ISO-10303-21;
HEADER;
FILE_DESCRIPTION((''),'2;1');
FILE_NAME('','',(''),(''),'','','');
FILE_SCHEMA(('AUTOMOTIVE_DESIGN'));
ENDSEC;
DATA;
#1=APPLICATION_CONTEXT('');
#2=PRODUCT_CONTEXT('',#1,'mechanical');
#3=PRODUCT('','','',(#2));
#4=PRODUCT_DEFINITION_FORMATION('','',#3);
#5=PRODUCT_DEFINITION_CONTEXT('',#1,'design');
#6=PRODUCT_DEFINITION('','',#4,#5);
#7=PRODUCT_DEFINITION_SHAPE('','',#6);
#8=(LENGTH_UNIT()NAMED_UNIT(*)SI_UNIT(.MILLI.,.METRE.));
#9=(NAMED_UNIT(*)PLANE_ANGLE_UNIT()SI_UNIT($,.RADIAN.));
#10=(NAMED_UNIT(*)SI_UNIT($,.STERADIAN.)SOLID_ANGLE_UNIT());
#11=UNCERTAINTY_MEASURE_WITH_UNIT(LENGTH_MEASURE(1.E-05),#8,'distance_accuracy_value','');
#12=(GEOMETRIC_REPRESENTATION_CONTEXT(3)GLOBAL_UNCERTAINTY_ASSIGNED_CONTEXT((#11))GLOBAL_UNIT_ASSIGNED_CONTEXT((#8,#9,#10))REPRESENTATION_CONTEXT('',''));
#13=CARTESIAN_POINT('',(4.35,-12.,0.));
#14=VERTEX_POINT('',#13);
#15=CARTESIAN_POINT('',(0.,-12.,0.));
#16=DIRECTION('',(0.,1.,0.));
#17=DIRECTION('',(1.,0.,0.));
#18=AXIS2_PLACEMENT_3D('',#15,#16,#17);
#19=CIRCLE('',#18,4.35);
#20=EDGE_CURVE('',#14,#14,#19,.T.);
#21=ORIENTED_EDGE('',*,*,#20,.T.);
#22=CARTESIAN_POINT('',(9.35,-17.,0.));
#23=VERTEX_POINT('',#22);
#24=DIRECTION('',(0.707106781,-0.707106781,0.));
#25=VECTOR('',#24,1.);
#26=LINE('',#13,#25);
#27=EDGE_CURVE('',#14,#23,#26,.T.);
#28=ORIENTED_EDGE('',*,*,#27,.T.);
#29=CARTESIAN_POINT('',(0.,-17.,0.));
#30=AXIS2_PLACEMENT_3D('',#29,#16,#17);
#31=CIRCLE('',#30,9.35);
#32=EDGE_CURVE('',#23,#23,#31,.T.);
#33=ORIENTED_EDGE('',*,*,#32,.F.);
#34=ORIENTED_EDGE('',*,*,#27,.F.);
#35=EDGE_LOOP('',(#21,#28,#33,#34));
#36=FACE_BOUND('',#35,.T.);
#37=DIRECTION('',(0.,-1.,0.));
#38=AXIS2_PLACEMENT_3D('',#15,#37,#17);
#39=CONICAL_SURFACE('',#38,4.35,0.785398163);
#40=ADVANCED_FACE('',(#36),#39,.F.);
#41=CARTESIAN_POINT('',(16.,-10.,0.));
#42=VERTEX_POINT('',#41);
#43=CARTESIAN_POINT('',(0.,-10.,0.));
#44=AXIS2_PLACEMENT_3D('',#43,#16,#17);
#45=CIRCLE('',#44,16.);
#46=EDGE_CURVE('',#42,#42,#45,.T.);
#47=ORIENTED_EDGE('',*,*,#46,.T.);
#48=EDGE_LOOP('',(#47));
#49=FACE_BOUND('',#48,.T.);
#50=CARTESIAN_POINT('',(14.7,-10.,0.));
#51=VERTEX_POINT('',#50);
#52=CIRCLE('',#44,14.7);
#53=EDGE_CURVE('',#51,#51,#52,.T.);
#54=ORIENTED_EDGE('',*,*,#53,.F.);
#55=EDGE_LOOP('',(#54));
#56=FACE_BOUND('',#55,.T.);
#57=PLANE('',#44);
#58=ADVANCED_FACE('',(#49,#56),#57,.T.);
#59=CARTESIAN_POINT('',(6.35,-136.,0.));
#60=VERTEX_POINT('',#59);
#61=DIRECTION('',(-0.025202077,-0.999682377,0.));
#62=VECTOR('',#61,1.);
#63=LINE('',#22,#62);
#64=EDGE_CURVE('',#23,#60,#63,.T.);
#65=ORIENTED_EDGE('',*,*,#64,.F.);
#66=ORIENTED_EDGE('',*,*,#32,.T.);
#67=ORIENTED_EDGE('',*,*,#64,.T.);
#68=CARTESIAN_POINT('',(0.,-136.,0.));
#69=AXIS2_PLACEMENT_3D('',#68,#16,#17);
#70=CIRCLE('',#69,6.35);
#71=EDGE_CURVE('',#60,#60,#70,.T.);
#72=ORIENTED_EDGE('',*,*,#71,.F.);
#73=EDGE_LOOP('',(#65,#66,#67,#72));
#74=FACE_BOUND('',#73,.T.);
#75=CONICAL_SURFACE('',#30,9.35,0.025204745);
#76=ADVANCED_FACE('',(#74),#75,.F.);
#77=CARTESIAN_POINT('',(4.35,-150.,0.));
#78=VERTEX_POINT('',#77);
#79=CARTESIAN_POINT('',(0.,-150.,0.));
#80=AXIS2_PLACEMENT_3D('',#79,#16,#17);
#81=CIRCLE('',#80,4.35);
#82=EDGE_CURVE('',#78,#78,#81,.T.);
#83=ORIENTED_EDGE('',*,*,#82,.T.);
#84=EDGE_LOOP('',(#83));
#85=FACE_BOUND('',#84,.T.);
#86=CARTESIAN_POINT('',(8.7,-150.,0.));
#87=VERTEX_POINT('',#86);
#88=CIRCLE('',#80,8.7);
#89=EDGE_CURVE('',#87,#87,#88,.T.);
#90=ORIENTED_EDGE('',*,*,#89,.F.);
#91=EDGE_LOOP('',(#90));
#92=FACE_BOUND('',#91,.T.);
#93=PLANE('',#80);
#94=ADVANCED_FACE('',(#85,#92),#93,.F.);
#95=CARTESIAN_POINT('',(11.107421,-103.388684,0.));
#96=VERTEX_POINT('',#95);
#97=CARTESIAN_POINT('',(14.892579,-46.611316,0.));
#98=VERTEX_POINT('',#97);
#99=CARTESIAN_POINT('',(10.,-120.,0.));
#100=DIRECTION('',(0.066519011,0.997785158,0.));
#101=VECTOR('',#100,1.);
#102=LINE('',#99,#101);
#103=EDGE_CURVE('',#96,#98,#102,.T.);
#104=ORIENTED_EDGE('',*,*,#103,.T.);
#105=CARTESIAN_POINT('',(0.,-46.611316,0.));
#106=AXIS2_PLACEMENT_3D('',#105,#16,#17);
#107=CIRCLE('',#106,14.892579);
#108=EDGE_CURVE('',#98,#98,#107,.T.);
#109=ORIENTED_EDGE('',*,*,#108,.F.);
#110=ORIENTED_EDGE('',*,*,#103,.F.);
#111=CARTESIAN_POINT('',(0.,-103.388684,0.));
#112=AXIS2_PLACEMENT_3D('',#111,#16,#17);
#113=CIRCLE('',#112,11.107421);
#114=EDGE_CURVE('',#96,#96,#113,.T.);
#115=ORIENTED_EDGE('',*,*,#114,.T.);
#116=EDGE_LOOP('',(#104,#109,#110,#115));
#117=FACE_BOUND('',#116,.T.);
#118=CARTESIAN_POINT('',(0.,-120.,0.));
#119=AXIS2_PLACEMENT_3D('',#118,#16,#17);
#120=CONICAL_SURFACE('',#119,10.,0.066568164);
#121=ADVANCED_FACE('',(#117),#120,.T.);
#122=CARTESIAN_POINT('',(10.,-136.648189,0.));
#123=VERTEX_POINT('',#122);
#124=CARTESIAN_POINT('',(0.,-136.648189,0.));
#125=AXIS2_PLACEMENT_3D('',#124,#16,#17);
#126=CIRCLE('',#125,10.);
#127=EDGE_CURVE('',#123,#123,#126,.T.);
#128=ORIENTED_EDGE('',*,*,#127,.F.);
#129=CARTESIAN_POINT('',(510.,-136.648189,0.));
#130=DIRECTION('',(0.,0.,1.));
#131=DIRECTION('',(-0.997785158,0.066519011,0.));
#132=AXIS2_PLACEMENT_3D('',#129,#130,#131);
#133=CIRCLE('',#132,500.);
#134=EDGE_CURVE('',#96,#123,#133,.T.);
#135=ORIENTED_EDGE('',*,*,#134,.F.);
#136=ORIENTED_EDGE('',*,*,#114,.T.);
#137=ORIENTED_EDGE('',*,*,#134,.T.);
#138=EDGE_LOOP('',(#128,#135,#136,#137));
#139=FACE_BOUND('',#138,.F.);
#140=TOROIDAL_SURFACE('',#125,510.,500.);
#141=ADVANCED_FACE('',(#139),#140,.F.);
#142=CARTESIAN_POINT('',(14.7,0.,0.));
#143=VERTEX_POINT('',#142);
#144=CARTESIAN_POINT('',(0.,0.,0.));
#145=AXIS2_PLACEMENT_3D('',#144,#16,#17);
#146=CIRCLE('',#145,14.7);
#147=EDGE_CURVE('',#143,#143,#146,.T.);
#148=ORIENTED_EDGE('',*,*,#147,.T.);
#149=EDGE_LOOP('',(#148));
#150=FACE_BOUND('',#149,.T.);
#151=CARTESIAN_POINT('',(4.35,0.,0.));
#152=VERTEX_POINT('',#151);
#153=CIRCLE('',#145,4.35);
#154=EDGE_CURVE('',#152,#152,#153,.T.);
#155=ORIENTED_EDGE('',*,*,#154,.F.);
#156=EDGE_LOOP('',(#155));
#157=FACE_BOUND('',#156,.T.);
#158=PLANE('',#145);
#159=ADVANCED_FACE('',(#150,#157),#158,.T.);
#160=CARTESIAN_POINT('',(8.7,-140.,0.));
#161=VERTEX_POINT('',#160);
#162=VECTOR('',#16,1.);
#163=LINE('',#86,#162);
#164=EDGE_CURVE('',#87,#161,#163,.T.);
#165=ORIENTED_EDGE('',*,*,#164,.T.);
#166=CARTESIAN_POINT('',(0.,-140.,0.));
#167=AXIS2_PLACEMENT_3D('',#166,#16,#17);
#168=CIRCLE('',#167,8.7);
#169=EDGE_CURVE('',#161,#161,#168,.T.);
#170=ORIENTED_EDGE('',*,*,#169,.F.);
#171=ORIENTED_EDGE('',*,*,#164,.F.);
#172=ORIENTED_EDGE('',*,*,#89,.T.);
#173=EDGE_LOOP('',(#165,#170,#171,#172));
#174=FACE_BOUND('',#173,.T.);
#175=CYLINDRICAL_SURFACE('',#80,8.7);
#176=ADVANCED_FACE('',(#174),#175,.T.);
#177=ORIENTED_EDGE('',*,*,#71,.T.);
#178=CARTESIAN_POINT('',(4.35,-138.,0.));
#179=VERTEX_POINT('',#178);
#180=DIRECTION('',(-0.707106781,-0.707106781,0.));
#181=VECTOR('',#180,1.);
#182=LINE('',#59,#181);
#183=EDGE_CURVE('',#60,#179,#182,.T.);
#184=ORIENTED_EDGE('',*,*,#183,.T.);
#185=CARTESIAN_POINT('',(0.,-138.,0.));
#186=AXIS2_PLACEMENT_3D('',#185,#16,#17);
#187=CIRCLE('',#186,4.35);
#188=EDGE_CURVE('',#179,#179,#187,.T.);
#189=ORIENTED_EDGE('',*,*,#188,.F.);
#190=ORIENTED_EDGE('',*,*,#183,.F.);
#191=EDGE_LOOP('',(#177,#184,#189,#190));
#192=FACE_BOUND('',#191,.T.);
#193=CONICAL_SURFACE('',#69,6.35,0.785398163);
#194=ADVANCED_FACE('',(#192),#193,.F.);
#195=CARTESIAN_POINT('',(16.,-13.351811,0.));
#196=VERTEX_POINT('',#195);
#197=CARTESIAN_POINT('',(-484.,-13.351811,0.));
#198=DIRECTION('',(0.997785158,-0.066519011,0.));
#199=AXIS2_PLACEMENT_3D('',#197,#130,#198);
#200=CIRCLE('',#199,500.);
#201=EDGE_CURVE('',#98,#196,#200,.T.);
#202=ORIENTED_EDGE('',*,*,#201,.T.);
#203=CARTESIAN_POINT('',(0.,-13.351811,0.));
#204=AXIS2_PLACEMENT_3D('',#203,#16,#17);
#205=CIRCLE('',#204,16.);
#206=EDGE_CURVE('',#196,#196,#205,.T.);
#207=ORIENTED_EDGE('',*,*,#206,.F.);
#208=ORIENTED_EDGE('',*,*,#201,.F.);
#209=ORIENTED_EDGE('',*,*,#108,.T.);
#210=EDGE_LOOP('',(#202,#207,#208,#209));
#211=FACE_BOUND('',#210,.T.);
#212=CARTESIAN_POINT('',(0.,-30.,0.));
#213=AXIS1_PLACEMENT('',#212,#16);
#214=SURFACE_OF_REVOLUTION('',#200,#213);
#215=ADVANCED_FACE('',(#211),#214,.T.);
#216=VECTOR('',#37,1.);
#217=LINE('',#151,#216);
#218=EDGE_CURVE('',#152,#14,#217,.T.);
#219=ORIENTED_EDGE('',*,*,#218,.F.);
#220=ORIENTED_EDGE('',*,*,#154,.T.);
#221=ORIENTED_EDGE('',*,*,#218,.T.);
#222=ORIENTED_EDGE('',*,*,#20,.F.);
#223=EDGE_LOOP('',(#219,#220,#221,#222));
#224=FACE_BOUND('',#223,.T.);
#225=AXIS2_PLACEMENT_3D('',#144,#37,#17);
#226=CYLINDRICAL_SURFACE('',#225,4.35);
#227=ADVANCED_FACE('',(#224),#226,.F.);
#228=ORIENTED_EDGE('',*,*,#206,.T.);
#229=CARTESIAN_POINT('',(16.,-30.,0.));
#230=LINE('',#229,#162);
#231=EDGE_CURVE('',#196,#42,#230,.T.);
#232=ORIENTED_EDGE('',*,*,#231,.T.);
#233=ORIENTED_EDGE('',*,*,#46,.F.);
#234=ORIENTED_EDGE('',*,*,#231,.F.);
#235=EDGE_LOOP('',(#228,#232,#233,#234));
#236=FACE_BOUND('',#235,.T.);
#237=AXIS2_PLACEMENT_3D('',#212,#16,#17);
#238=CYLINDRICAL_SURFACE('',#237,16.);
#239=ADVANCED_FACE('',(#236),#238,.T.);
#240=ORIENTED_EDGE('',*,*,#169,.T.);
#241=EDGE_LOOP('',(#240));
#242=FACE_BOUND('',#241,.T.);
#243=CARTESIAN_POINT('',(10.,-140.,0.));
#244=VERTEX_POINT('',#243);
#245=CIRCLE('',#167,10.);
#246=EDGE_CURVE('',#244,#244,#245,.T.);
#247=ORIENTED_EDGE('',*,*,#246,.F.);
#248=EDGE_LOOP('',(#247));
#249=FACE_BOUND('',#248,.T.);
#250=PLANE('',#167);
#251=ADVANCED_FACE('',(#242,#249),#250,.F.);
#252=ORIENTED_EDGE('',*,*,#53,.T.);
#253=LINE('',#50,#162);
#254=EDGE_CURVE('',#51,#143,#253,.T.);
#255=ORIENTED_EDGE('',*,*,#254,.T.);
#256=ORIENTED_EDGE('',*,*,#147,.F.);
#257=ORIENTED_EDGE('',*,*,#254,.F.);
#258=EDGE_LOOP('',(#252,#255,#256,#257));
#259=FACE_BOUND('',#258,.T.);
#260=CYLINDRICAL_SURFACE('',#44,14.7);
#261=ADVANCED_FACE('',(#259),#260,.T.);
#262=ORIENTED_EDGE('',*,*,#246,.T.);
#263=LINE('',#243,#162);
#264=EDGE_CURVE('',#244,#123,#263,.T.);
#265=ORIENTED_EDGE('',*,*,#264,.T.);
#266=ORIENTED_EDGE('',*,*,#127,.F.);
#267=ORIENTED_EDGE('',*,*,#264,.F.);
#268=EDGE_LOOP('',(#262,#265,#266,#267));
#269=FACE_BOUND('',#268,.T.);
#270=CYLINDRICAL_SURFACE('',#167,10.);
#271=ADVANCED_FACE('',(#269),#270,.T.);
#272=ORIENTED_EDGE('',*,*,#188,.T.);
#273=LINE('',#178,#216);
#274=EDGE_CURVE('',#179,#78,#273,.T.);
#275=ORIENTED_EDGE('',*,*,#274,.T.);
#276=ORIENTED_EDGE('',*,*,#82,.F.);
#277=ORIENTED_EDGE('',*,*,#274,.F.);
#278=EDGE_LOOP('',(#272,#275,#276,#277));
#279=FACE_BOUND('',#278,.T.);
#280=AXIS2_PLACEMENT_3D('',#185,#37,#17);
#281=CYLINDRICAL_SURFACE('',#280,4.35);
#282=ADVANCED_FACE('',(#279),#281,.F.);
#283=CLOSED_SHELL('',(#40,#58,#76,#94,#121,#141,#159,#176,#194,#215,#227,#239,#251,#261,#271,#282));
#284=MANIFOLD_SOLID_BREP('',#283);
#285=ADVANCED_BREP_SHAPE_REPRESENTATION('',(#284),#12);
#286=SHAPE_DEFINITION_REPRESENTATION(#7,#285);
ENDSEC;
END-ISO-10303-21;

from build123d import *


# Not quite as in the source:
# - a fillet or chamfer that OpenCascade refuses, or shapes differently, is made with other operations: its cross-section is extruded or revolved along the edge and cut away or added


with BuildPart() as f1:
    # F0 (on Top) → F1 (revolve)
    with BuildSketch(Plane.XY):
        Polygon((14.7, 0), (4.35, 0), (4.35, -12), (9.35, -17), (6.35, -136), (4.35, -138), (4.35, -150), (8.7, -150), (8.7, -140), (10, -140), (10, -120), (16, -30), (16, -10), (14.7, -10), align=None)
    revolve(axis=Axis((0, -75, 0), (0, 1, 0)))

    # F2: fillet of radius 500 on 2 edges, made by hand

    # F2_s1 → F2_t2 (revolve, cut)
    with BuildSketch(Plane.XY):
        with BuildLine():
            ThreePointArc((14.8925789283, -46.6113160754), (15.7230680408, -29.9907791687), (16, -13.3518108135))
            Line((16, -13.3518108135), (16, -30))
            Line((16, -30), (14.8925789283, -46.6113160754))
        make_face()
    revolve(axis=Axis((0, -30, 0), (0, 1, 0)), mode=Mode.SUBTRACT)

    # F2_s3 → F2_t4 (revolve)
    with BuildSketch(Plane.XY):
        with BuildLine():
            ThreePointArc((11.1074210717, -103.3886839246), (10.2769319592, -120.0092208313), (10, -136.6481891865))
            Line((10, -136.6481891865), (10, -120))
            Line((10, -120), (11.1074210717, -103.3886839246))
        make_face()
    revolve(axis=Axis((0, -120, 0), (0, 1, 0)))


solid = f1.part
